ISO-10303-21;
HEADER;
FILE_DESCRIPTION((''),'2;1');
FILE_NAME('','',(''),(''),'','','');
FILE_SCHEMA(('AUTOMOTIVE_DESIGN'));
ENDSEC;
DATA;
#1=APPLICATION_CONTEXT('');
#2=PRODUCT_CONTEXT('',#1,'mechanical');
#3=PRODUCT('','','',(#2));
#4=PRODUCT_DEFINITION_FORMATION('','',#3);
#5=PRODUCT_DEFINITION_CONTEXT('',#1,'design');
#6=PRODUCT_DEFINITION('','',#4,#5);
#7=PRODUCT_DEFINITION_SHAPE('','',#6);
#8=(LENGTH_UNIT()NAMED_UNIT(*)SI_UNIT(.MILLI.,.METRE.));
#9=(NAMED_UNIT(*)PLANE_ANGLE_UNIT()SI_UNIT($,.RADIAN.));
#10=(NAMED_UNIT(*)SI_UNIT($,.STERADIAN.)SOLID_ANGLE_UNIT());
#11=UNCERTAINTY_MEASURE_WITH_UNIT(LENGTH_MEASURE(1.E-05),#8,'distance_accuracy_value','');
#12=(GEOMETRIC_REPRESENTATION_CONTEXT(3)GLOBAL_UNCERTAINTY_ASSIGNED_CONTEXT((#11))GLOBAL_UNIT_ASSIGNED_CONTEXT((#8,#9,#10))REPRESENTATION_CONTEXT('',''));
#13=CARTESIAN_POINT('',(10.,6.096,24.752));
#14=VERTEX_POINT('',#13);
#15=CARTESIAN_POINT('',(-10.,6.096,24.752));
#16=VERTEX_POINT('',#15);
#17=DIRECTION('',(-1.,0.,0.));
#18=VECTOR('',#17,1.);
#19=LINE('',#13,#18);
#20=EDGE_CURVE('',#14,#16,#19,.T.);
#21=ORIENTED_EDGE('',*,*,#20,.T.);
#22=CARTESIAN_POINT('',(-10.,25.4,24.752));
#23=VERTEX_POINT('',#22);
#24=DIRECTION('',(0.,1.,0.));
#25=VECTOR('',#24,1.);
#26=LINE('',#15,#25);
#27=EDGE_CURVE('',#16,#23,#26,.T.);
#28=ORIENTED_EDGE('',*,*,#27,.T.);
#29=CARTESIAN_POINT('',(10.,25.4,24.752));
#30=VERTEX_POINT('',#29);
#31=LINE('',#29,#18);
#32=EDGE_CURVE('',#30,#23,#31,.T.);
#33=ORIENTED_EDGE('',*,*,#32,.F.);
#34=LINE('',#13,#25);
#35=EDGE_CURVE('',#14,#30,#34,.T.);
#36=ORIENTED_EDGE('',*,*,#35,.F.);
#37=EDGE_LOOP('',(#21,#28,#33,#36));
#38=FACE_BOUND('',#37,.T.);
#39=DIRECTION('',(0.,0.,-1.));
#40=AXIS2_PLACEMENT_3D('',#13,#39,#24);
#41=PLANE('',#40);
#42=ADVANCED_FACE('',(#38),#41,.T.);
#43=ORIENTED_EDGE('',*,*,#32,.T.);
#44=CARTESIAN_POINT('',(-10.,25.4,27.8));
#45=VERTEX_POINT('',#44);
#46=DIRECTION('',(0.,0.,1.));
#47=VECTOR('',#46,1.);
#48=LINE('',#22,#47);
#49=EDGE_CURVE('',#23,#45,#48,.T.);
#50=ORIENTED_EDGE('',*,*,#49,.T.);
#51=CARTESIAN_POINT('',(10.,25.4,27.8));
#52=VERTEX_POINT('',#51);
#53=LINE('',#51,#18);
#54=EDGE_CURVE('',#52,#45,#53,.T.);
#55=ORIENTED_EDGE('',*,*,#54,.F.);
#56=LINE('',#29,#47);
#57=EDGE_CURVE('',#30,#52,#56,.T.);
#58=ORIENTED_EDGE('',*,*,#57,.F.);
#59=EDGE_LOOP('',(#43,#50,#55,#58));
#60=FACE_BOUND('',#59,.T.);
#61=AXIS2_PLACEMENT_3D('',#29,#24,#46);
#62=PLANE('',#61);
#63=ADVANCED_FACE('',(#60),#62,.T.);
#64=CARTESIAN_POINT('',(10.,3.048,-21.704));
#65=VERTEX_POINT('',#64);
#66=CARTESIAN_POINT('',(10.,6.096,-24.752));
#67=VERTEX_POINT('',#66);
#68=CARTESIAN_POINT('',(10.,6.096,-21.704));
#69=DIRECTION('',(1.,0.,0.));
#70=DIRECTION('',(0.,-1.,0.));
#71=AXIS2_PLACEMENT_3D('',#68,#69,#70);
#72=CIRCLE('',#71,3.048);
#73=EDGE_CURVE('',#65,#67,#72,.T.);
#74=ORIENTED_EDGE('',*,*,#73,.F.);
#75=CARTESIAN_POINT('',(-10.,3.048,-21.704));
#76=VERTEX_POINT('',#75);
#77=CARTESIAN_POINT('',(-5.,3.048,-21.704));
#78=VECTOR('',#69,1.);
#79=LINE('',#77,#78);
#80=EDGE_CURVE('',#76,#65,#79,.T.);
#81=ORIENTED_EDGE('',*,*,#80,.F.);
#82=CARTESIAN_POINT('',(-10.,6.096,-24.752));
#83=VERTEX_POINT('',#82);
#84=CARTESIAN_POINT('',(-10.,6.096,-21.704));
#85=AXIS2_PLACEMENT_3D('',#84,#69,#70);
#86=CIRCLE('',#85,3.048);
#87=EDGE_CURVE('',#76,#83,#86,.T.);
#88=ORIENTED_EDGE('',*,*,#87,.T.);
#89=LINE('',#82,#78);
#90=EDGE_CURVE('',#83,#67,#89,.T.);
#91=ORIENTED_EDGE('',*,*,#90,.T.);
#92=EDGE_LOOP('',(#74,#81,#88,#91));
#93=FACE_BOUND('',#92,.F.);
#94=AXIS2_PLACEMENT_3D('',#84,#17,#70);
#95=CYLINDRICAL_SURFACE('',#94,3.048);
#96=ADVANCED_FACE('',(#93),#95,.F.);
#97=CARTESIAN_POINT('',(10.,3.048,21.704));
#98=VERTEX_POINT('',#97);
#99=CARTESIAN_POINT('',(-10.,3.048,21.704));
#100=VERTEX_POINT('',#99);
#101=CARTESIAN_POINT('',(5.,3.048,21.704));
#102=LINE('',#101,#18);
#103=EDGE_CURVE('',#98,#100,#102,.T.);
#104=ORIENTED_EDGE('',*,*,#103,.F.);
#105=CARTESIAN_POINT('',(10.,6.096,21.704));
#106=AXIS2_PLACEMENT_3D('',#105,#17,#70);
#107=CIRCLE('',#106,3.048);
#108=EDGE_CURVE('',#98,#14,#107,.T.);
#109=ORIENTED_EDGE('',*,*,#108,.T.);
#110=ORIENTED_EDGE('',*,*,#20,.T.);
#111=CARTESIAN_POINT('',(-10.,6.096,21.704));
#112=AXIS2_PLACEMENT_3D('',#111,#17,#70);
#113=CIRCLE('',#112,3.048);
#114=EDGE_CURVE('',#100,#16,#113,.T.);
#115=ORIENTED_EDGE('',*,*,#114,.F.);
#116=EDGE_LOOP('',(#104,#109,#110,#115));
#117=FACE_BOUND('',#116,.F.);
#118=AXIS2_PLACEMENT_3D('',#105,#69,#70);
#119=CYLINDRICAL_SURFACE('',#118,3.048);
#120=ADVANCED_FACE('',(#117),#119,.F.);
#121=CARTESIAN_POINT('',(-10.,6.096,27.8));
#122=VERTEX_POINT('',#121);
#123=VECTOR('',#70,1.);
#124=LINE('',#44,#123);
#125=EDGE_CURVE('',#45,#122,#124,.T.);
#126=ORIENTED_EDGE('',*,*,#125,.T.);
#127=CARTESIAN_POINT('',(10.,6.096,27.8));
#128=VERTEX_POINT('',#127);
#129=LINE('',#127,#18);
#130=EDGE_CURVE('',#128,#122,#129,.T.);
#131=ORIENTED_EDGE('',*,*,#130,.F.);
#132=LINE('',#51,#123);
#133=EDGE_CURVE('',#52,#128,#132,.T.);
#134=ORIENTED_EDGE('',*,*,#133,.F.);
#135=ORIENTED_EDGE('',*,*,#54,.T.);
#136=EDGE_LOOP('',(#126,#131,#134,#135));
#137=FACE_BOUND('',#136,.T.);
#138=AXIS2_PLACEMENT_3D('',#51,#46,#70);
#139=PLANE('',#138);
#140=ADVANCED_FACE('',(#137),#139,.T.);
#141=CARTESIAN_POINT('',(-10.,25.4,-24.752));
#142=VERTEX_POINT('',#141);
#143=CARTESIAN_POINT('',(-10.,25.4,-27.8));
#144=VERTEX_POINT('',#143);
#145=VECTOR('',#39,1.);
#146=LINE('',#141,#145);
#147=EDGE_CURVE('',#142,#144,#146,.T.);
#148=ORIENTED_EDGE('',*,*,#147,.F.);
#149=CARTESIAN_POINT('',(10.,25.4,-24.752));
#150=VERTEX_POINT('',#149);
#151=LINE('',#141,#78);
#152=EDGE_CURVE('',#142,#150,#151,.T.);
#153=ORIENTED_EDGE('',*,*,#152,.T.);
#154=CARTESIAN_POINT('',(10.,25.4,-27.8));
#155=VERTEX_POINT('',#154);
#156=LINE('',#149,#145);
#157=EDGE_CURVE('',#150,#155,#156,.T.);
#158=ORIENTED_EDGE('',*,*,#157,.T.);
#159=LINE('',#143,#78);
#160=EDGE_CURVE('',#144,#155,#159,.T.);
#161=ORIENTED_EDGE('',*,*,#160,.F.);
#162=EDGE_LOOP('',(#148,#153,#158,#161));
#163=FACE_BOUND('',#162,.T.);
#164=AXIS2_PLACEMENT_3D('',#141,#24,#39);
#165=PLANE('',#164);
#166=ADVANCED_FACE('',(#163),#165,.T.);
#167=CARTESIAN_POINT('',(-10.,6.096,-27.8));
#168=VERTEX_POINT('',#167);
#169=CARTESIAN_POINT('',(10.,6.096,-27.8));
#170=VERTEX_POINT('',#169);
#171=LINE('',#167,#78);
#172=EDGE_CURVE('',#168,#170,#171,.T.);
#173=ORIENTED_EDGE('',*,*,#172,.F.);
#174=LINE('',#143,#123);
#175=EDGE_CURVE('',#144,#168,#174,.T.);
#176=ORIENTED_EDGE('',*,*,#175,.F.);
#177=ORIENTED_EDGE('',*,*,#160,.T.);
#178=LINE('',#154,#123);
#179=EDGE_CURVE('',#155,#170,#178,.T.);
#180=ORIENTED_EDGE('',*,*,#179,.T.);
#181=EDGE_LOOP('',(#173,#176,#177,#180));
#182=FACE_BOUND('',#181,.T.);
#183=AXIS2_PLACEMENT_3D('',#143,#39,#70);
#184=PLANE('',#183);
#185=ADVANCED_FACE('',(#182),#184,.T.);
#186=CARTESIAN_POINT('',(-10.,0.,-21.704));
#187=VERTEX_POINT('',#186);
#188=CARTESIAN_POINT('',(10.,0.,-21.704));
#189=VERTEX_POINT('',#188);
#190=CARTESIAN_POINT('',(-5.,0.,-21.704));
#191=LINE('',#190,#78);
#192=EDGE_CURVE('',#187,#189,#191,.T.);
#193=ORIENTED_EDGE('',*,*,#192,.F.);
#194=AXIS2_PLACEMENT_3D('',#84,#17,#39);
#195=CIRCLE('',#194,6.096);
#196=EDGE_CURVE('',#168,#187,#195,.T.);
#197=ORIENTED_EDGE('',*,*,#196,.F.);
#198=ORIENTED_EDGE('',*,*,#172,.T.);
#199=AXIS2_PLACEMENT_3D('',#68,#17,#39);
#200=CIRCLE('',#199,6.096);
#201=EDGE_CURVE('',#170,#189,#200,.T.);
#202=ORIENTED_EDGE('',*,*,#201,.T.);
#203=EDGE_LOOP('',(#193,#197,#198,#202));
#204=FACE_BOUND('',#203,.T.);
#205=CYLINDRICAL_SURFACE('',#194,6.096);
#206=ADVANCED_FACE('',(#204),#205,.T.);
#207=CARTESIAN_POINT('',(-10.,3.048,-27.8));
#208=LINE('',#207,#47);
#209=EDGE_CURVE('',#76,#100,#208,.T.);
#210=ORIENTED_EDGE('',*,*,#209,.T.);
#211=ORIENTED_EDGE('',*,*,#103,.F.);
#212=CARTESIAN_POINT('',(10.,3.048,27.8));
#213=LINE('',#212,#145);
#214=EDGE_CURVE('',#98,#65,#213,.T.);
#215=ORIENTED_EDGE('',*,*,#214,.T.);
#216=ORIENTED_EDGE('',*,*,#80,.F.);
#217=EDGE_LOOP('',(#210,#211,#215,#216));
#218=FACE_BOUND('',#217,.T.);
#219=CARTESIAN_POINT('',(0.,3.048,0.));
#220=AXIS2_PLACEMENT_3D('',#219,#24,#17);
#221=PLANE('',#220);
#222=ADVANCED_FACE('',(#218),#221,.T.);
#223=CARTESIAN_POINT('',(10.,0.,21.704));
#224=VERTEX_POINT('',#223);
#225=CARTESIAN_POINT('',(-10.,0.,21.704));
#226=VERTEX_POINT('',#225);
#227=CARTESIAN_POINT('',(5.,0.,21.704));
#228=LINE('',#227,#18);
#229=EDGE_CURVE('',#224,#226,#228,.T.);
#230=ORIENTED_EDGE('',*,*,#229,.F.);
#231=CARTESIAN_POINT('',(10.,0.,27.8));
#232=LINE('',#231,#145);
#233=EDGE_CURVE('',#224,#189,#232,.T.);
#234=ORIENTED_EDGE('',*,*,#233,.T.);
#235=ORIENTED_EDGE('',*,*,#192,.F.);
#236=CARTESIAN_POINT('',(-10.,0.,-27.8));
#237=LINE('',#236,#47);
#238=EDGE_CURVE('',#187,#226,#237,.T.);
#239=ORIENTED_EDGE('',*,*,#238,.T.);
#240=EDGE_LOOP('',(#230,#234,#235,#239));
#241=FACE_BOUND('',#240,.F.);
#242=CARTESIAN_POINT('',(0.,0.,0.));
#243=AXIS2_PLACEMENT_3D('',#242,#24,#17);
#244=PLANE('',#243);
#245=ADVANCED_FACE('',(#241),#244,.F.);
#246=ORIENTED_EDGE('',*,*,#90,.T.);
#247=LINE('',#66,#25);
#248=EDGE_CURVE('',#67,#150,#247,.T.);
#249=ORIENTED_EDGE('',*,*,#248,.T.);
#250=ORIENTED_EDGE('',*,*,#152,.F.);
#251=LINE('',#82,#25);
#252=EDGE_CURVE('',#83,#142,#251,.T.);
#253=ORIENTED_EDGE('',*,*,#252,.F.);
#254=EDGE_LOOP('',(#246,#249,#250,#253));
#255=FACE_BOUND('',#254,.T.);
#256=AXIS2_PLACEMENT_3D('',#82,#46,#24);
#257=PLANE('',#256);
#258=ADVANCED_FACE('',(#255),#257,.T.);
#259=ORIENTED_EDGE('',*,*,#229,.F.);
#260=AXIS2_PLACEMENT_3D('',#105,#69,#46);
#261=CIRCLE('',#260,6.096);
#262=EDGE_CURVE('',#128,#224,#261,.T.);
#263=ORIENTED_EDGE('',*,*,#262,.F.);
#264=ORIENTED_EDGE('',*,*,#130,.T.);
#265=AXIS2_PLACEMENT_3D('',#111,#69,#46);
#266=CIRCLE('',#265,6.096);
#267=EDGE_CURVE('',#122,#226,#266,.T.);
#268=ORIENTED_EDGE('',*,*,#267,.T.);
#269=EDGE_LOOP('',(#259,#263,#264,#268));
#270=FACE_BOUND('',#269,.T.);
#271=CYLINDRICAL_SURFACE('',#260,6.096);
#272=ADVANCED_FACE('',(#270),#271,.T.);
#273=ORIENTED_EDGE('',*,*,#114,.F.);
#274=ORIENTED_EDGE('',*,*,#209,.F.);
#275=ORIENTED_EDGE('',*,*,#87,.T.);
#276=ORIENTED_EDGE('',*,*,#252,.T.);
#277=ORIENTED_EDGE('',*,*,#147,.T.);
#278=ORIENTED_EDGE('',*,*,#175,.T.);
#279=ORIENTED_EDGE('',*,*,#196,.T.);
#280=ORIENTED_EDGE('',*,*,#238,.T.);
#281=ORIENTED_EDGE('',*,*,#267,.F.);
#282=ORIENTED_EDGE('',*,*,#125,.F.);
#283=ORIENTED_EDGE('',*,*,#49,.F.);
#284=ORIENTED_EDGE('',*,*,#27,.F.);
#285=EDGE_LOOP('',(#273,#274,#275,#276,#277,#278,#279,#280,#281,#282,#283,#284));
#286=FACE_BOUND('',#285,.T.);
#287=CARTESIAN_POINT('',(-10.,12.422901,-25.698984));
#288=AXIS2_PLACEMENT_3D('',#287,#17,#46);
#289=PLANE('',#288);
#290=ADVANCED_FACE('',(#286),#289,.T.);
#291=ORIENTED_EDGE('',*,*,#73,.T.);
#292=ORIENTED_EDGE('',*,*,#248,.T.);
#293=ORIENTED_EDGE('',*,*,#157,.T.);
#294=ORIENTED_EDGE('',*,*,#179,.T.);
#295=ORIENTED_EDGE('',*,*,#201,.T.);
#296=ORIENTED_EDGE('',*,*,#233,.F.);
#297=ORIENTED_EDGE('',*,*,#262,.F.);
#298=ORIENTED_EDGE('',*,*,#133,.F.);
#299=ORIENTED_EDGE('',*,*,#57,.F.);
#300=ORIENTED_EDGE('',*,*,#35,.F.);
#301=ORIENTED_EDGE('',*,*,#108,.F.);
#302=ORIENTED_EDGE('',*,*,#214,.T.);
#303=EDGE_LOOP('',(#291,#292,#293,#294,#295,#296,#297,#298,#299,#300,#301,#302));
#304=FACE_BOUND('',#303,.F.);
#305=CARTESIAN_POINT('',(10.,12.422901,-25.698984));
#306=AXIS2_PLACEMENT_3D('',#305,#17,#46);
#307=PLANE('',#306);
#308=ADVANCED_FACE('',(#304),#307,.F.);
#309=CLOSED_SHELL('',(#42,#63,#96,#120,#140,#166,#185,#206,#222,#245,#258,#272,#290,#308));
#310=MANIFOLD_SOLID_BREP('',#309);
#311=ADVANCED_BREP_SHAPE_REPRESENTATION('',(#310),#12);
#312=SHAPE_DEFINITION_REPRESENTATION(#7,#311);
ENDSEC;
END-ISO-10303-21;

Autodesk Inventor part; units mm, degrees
ref_plane "YZ Plane" through (0, 0, 0) normal (1, 0, 0) x (0, 1, 0)
ref_plane "XZ Plane" through (0, 0, 0) normal (0, 1, 0) x (-1, 0, 0)
ref_plane "XY Plane" through (0, 0, 0) normal (0, 0, 1) x (1, 0, 0)
sketch "Sketch1" plane through (0, 0, 0) normal (0, 1, 0) x (-1, 0, 0)
  line L0 (10, 27.8) -> (-10, 27.8)
  line L1 (-10, 27.8) -> (-10, -27.8)
  line L2 (-10, -27.8) -> (10, -27.8)
  line L3 (10, -27.8) -> (10, 27.8)
  line L4 (10, 27.8) -> (-10, -27.8) construction
  line L5 (-10, 27.8) -> (10, -27.8) construction
  point P0 (0, 0)
  dimension "d0" = 55.6
  dimension "d1" = 20
extrude "Plate1" add sketch "Sketch1" along normal blind 3.048
sketch "Sketch2" plane through (10, 0, 27.8) normal (0, 0, -1) x (-1, 0, 0)
  line L0 (20, 3.048) -> (0, 3.048)
  line L1 (0, 3.048) -> (0, 25.4)
  line L2 (0, 25.4) -> (20, 25.4)
  line L3 (20, 25.4) -> (20, 3.048)
edge flange "Flange1" height 25.4 angle 90 thickness 3.048 bend radius 3.048 thickness toward (0, 0, -1) relief tear relief width 3.048 relief depth 1.524 edges at (0, 3.048, 27.8) wall of the first edge with corners at (-10, 3.048, 27.8) (10, 3.048, 27.8) (10, 25.4, 27.8) (-10, 25.4, 27.8)
bend "Bend1"
corner "Corner1"
sketch "Sketch3" plane through (-10, 0, -27.8) normal (0, 0, 1) x (1, 0, 0)
  line L0 (20, 3.048) -> (0, 3.048)
  line L1 (0, 3.048) -> (0, 25.4)
  line L2 (0, 25.4) -> (20, 25.4)
  line L3 (20, 25.4) -> (20, 3.048)
edge flange "Flange2" height 25.4 angle 90 thickness 3.048 bend radius 3.048 thickness toward (0, 0, 1) relief tear relief width 3.048 relief depth 1.524 edges at (0, 3.048, -27.8) wall of the first edge with corners at (10, 3.048, -27.8) (-10, 3.048, -27.8) (-10, 25.4, -27.8) (10, 25.4, -27.8)
bend "Bend2"
corner "Corner2"
equation "\"d2\" = Thickness"
equation "\"d3\" = BendReliefWidth"
equation "\"d4\" = BendReliefDepth"
equation "\"d5\" = MinimumRemnant"
equation "\"d6\" = TransitionRadius"
equation "\"d9\" = BendRadius"
equation "\"d10\" = CornerReliefSize"
equation "\"d11\" = GapSize"
equation "\"d12\" = JacobiRadiusSize"
equation "\"d13\" = BendReliefWidth"
equation "\"d14\" = BendReliefDepth"
equation "\"d15\" = MinimumRemnant"
equation "\"d16\" = TransitionRadius"
equation "\"d19\" = BendRadius"
equation "\"d20\" = CornerReliefSize"
equation "\"d21\" = GapSize"
equation "\"d22\" = JacobiRadiusSize"
equation "\"BendRadius\" = Thickness"
equation "\"BendReliefWidth\" = Thickness"
equation "\"BendReliefDepth\" = 0.5 * Thickness"
equation "\"CornerReliefSize\" = 4 * Thickness"
equation "\"MinimumRemnant\" = 2 * Thickness"
equation "\"TransitionRadius\" = BendRadius"
equation "\"JacobiRadiusSize\" = BendRadius"
equation "\"GapSize\" = Thickness"
equation "\"Thickness\" = 3.048"
properties part number "bracket1"
